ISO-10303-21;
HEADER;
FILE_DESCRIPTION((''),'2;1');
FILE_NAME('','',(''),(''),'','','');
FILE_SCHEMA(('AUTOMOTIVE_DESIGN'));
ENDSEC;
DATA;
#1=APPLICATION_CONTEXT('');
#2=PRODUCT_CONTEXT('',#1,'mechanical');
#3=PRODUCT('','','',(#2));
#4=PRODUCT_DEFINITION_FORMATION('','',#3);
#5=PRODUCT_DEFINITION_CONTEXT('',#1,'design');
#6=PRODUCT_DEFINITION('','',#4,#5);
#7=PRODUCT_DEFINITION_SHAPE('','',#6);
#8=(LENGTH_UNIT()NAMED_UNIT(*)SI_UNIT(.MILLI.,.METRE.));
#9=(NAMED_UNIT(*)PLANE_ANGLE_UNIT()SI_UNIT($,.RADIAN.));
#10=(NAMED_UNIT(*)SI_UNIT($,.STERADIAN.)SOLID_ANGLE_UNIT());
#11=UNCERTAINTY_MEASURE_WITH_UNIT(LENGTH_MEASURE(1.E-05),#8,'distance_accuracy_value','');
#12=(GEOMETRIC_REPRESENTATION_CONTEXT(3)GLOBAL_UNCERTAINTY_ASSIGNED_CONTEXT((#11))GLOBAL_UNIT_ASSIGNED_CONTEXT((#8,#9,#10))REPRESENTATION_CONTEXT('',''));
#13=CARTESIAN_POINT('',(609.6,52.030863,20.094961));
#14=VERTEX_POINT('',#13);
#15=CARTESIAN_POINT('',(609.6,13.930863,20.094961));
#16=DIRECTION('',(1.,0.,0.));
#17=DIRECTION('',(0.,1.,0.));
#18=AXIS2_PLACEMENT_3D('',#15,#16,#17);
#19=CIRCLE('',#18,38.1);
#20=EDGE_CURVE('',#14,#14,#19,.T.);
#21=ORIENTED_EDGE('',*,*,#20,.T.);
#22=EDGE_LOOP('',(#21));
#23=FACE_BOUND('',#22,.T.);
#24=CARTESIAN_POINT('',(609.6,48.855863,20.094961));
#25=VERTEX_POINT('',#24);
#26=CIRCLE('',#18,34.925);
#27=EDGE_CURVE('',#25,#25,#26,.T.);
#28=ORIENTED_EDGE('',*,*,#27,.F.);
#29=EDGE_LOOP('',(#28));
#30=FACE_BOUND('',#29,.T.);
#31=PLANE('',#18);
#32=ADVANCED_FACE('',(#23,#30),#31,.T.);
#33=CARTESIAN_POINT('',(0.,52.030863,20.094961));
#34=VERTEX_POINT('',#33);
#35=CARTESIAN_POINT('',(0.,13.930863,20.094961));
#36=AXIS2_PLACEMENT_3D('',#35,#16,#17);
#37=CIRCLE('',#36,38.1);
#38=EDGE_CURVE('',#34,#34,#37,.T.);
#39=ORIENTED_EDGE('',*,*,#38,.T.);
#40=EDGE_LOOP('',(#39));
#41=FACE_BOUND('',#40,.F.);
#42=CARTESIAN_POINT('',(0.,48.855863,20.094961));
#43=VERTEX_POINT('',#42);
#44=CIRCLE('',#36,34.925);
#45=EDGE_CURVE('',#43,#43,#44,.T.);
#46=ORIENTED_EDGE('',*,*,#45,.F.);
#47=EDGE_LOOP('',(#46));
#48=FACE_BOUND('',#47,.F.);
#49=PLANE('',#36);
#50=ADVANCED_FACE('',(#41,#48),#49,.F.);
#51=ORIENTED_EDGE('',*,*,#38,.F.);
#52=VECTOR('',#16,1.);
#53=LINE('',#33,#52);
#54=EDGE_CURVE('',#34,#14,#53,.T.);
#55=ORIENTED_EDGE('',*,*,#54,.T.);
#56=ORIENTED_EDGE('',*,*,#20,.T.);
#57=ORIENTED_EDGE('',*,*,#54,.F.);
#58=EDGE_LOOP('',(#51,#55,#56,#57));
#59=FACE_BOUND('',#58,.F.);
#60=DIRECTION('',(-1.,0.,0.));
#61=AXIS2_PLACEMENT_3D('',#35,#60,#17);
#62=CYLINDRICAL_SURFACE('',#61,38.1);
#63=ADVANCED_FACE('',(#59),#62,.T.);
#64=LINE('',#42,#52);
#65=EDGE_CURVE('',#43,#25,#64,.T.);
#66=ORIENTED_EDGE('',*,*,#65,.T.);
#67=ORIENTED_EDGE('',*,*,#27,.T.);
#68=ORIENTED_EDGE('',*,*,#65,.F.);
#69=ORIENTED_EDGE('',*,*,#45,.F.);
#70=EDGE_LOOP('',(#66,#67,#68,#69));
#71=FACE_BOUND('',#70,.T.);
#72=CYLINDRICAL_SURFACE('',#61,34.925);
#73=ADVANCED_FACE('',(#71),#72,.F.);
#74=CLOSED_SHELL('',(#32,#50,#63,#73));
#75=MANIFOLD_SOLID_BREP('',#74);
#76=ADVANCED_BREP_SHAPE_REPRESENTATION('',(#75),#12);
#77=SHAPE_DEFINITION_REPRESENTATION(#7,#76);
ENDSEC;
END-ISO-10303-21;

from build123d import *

# Parameters (mm, degrees)
F1_R     = 38.1
F1_R_2   = 34.925
F2_DEPTH = 609.6


# Not quite as in the source:
# - a variable given as a bare number and used for a length is read in inches; the dataset says mm whatever the document's units were


with BuildPart() as f2:
    # F1 (on Right) → F2 (new body)
    with BuildSketch(Plane.YZ):
        with Locations((13.9308627695, 20.094960928)):
            Circle(F1_R)
        with Locations((13.9308627695, 20.094960928)):
            Circle(F1_R_2, mode=Mode.SUBTRACT)
    extrude(amount=F2_DEPTH)


solid = f2.part
